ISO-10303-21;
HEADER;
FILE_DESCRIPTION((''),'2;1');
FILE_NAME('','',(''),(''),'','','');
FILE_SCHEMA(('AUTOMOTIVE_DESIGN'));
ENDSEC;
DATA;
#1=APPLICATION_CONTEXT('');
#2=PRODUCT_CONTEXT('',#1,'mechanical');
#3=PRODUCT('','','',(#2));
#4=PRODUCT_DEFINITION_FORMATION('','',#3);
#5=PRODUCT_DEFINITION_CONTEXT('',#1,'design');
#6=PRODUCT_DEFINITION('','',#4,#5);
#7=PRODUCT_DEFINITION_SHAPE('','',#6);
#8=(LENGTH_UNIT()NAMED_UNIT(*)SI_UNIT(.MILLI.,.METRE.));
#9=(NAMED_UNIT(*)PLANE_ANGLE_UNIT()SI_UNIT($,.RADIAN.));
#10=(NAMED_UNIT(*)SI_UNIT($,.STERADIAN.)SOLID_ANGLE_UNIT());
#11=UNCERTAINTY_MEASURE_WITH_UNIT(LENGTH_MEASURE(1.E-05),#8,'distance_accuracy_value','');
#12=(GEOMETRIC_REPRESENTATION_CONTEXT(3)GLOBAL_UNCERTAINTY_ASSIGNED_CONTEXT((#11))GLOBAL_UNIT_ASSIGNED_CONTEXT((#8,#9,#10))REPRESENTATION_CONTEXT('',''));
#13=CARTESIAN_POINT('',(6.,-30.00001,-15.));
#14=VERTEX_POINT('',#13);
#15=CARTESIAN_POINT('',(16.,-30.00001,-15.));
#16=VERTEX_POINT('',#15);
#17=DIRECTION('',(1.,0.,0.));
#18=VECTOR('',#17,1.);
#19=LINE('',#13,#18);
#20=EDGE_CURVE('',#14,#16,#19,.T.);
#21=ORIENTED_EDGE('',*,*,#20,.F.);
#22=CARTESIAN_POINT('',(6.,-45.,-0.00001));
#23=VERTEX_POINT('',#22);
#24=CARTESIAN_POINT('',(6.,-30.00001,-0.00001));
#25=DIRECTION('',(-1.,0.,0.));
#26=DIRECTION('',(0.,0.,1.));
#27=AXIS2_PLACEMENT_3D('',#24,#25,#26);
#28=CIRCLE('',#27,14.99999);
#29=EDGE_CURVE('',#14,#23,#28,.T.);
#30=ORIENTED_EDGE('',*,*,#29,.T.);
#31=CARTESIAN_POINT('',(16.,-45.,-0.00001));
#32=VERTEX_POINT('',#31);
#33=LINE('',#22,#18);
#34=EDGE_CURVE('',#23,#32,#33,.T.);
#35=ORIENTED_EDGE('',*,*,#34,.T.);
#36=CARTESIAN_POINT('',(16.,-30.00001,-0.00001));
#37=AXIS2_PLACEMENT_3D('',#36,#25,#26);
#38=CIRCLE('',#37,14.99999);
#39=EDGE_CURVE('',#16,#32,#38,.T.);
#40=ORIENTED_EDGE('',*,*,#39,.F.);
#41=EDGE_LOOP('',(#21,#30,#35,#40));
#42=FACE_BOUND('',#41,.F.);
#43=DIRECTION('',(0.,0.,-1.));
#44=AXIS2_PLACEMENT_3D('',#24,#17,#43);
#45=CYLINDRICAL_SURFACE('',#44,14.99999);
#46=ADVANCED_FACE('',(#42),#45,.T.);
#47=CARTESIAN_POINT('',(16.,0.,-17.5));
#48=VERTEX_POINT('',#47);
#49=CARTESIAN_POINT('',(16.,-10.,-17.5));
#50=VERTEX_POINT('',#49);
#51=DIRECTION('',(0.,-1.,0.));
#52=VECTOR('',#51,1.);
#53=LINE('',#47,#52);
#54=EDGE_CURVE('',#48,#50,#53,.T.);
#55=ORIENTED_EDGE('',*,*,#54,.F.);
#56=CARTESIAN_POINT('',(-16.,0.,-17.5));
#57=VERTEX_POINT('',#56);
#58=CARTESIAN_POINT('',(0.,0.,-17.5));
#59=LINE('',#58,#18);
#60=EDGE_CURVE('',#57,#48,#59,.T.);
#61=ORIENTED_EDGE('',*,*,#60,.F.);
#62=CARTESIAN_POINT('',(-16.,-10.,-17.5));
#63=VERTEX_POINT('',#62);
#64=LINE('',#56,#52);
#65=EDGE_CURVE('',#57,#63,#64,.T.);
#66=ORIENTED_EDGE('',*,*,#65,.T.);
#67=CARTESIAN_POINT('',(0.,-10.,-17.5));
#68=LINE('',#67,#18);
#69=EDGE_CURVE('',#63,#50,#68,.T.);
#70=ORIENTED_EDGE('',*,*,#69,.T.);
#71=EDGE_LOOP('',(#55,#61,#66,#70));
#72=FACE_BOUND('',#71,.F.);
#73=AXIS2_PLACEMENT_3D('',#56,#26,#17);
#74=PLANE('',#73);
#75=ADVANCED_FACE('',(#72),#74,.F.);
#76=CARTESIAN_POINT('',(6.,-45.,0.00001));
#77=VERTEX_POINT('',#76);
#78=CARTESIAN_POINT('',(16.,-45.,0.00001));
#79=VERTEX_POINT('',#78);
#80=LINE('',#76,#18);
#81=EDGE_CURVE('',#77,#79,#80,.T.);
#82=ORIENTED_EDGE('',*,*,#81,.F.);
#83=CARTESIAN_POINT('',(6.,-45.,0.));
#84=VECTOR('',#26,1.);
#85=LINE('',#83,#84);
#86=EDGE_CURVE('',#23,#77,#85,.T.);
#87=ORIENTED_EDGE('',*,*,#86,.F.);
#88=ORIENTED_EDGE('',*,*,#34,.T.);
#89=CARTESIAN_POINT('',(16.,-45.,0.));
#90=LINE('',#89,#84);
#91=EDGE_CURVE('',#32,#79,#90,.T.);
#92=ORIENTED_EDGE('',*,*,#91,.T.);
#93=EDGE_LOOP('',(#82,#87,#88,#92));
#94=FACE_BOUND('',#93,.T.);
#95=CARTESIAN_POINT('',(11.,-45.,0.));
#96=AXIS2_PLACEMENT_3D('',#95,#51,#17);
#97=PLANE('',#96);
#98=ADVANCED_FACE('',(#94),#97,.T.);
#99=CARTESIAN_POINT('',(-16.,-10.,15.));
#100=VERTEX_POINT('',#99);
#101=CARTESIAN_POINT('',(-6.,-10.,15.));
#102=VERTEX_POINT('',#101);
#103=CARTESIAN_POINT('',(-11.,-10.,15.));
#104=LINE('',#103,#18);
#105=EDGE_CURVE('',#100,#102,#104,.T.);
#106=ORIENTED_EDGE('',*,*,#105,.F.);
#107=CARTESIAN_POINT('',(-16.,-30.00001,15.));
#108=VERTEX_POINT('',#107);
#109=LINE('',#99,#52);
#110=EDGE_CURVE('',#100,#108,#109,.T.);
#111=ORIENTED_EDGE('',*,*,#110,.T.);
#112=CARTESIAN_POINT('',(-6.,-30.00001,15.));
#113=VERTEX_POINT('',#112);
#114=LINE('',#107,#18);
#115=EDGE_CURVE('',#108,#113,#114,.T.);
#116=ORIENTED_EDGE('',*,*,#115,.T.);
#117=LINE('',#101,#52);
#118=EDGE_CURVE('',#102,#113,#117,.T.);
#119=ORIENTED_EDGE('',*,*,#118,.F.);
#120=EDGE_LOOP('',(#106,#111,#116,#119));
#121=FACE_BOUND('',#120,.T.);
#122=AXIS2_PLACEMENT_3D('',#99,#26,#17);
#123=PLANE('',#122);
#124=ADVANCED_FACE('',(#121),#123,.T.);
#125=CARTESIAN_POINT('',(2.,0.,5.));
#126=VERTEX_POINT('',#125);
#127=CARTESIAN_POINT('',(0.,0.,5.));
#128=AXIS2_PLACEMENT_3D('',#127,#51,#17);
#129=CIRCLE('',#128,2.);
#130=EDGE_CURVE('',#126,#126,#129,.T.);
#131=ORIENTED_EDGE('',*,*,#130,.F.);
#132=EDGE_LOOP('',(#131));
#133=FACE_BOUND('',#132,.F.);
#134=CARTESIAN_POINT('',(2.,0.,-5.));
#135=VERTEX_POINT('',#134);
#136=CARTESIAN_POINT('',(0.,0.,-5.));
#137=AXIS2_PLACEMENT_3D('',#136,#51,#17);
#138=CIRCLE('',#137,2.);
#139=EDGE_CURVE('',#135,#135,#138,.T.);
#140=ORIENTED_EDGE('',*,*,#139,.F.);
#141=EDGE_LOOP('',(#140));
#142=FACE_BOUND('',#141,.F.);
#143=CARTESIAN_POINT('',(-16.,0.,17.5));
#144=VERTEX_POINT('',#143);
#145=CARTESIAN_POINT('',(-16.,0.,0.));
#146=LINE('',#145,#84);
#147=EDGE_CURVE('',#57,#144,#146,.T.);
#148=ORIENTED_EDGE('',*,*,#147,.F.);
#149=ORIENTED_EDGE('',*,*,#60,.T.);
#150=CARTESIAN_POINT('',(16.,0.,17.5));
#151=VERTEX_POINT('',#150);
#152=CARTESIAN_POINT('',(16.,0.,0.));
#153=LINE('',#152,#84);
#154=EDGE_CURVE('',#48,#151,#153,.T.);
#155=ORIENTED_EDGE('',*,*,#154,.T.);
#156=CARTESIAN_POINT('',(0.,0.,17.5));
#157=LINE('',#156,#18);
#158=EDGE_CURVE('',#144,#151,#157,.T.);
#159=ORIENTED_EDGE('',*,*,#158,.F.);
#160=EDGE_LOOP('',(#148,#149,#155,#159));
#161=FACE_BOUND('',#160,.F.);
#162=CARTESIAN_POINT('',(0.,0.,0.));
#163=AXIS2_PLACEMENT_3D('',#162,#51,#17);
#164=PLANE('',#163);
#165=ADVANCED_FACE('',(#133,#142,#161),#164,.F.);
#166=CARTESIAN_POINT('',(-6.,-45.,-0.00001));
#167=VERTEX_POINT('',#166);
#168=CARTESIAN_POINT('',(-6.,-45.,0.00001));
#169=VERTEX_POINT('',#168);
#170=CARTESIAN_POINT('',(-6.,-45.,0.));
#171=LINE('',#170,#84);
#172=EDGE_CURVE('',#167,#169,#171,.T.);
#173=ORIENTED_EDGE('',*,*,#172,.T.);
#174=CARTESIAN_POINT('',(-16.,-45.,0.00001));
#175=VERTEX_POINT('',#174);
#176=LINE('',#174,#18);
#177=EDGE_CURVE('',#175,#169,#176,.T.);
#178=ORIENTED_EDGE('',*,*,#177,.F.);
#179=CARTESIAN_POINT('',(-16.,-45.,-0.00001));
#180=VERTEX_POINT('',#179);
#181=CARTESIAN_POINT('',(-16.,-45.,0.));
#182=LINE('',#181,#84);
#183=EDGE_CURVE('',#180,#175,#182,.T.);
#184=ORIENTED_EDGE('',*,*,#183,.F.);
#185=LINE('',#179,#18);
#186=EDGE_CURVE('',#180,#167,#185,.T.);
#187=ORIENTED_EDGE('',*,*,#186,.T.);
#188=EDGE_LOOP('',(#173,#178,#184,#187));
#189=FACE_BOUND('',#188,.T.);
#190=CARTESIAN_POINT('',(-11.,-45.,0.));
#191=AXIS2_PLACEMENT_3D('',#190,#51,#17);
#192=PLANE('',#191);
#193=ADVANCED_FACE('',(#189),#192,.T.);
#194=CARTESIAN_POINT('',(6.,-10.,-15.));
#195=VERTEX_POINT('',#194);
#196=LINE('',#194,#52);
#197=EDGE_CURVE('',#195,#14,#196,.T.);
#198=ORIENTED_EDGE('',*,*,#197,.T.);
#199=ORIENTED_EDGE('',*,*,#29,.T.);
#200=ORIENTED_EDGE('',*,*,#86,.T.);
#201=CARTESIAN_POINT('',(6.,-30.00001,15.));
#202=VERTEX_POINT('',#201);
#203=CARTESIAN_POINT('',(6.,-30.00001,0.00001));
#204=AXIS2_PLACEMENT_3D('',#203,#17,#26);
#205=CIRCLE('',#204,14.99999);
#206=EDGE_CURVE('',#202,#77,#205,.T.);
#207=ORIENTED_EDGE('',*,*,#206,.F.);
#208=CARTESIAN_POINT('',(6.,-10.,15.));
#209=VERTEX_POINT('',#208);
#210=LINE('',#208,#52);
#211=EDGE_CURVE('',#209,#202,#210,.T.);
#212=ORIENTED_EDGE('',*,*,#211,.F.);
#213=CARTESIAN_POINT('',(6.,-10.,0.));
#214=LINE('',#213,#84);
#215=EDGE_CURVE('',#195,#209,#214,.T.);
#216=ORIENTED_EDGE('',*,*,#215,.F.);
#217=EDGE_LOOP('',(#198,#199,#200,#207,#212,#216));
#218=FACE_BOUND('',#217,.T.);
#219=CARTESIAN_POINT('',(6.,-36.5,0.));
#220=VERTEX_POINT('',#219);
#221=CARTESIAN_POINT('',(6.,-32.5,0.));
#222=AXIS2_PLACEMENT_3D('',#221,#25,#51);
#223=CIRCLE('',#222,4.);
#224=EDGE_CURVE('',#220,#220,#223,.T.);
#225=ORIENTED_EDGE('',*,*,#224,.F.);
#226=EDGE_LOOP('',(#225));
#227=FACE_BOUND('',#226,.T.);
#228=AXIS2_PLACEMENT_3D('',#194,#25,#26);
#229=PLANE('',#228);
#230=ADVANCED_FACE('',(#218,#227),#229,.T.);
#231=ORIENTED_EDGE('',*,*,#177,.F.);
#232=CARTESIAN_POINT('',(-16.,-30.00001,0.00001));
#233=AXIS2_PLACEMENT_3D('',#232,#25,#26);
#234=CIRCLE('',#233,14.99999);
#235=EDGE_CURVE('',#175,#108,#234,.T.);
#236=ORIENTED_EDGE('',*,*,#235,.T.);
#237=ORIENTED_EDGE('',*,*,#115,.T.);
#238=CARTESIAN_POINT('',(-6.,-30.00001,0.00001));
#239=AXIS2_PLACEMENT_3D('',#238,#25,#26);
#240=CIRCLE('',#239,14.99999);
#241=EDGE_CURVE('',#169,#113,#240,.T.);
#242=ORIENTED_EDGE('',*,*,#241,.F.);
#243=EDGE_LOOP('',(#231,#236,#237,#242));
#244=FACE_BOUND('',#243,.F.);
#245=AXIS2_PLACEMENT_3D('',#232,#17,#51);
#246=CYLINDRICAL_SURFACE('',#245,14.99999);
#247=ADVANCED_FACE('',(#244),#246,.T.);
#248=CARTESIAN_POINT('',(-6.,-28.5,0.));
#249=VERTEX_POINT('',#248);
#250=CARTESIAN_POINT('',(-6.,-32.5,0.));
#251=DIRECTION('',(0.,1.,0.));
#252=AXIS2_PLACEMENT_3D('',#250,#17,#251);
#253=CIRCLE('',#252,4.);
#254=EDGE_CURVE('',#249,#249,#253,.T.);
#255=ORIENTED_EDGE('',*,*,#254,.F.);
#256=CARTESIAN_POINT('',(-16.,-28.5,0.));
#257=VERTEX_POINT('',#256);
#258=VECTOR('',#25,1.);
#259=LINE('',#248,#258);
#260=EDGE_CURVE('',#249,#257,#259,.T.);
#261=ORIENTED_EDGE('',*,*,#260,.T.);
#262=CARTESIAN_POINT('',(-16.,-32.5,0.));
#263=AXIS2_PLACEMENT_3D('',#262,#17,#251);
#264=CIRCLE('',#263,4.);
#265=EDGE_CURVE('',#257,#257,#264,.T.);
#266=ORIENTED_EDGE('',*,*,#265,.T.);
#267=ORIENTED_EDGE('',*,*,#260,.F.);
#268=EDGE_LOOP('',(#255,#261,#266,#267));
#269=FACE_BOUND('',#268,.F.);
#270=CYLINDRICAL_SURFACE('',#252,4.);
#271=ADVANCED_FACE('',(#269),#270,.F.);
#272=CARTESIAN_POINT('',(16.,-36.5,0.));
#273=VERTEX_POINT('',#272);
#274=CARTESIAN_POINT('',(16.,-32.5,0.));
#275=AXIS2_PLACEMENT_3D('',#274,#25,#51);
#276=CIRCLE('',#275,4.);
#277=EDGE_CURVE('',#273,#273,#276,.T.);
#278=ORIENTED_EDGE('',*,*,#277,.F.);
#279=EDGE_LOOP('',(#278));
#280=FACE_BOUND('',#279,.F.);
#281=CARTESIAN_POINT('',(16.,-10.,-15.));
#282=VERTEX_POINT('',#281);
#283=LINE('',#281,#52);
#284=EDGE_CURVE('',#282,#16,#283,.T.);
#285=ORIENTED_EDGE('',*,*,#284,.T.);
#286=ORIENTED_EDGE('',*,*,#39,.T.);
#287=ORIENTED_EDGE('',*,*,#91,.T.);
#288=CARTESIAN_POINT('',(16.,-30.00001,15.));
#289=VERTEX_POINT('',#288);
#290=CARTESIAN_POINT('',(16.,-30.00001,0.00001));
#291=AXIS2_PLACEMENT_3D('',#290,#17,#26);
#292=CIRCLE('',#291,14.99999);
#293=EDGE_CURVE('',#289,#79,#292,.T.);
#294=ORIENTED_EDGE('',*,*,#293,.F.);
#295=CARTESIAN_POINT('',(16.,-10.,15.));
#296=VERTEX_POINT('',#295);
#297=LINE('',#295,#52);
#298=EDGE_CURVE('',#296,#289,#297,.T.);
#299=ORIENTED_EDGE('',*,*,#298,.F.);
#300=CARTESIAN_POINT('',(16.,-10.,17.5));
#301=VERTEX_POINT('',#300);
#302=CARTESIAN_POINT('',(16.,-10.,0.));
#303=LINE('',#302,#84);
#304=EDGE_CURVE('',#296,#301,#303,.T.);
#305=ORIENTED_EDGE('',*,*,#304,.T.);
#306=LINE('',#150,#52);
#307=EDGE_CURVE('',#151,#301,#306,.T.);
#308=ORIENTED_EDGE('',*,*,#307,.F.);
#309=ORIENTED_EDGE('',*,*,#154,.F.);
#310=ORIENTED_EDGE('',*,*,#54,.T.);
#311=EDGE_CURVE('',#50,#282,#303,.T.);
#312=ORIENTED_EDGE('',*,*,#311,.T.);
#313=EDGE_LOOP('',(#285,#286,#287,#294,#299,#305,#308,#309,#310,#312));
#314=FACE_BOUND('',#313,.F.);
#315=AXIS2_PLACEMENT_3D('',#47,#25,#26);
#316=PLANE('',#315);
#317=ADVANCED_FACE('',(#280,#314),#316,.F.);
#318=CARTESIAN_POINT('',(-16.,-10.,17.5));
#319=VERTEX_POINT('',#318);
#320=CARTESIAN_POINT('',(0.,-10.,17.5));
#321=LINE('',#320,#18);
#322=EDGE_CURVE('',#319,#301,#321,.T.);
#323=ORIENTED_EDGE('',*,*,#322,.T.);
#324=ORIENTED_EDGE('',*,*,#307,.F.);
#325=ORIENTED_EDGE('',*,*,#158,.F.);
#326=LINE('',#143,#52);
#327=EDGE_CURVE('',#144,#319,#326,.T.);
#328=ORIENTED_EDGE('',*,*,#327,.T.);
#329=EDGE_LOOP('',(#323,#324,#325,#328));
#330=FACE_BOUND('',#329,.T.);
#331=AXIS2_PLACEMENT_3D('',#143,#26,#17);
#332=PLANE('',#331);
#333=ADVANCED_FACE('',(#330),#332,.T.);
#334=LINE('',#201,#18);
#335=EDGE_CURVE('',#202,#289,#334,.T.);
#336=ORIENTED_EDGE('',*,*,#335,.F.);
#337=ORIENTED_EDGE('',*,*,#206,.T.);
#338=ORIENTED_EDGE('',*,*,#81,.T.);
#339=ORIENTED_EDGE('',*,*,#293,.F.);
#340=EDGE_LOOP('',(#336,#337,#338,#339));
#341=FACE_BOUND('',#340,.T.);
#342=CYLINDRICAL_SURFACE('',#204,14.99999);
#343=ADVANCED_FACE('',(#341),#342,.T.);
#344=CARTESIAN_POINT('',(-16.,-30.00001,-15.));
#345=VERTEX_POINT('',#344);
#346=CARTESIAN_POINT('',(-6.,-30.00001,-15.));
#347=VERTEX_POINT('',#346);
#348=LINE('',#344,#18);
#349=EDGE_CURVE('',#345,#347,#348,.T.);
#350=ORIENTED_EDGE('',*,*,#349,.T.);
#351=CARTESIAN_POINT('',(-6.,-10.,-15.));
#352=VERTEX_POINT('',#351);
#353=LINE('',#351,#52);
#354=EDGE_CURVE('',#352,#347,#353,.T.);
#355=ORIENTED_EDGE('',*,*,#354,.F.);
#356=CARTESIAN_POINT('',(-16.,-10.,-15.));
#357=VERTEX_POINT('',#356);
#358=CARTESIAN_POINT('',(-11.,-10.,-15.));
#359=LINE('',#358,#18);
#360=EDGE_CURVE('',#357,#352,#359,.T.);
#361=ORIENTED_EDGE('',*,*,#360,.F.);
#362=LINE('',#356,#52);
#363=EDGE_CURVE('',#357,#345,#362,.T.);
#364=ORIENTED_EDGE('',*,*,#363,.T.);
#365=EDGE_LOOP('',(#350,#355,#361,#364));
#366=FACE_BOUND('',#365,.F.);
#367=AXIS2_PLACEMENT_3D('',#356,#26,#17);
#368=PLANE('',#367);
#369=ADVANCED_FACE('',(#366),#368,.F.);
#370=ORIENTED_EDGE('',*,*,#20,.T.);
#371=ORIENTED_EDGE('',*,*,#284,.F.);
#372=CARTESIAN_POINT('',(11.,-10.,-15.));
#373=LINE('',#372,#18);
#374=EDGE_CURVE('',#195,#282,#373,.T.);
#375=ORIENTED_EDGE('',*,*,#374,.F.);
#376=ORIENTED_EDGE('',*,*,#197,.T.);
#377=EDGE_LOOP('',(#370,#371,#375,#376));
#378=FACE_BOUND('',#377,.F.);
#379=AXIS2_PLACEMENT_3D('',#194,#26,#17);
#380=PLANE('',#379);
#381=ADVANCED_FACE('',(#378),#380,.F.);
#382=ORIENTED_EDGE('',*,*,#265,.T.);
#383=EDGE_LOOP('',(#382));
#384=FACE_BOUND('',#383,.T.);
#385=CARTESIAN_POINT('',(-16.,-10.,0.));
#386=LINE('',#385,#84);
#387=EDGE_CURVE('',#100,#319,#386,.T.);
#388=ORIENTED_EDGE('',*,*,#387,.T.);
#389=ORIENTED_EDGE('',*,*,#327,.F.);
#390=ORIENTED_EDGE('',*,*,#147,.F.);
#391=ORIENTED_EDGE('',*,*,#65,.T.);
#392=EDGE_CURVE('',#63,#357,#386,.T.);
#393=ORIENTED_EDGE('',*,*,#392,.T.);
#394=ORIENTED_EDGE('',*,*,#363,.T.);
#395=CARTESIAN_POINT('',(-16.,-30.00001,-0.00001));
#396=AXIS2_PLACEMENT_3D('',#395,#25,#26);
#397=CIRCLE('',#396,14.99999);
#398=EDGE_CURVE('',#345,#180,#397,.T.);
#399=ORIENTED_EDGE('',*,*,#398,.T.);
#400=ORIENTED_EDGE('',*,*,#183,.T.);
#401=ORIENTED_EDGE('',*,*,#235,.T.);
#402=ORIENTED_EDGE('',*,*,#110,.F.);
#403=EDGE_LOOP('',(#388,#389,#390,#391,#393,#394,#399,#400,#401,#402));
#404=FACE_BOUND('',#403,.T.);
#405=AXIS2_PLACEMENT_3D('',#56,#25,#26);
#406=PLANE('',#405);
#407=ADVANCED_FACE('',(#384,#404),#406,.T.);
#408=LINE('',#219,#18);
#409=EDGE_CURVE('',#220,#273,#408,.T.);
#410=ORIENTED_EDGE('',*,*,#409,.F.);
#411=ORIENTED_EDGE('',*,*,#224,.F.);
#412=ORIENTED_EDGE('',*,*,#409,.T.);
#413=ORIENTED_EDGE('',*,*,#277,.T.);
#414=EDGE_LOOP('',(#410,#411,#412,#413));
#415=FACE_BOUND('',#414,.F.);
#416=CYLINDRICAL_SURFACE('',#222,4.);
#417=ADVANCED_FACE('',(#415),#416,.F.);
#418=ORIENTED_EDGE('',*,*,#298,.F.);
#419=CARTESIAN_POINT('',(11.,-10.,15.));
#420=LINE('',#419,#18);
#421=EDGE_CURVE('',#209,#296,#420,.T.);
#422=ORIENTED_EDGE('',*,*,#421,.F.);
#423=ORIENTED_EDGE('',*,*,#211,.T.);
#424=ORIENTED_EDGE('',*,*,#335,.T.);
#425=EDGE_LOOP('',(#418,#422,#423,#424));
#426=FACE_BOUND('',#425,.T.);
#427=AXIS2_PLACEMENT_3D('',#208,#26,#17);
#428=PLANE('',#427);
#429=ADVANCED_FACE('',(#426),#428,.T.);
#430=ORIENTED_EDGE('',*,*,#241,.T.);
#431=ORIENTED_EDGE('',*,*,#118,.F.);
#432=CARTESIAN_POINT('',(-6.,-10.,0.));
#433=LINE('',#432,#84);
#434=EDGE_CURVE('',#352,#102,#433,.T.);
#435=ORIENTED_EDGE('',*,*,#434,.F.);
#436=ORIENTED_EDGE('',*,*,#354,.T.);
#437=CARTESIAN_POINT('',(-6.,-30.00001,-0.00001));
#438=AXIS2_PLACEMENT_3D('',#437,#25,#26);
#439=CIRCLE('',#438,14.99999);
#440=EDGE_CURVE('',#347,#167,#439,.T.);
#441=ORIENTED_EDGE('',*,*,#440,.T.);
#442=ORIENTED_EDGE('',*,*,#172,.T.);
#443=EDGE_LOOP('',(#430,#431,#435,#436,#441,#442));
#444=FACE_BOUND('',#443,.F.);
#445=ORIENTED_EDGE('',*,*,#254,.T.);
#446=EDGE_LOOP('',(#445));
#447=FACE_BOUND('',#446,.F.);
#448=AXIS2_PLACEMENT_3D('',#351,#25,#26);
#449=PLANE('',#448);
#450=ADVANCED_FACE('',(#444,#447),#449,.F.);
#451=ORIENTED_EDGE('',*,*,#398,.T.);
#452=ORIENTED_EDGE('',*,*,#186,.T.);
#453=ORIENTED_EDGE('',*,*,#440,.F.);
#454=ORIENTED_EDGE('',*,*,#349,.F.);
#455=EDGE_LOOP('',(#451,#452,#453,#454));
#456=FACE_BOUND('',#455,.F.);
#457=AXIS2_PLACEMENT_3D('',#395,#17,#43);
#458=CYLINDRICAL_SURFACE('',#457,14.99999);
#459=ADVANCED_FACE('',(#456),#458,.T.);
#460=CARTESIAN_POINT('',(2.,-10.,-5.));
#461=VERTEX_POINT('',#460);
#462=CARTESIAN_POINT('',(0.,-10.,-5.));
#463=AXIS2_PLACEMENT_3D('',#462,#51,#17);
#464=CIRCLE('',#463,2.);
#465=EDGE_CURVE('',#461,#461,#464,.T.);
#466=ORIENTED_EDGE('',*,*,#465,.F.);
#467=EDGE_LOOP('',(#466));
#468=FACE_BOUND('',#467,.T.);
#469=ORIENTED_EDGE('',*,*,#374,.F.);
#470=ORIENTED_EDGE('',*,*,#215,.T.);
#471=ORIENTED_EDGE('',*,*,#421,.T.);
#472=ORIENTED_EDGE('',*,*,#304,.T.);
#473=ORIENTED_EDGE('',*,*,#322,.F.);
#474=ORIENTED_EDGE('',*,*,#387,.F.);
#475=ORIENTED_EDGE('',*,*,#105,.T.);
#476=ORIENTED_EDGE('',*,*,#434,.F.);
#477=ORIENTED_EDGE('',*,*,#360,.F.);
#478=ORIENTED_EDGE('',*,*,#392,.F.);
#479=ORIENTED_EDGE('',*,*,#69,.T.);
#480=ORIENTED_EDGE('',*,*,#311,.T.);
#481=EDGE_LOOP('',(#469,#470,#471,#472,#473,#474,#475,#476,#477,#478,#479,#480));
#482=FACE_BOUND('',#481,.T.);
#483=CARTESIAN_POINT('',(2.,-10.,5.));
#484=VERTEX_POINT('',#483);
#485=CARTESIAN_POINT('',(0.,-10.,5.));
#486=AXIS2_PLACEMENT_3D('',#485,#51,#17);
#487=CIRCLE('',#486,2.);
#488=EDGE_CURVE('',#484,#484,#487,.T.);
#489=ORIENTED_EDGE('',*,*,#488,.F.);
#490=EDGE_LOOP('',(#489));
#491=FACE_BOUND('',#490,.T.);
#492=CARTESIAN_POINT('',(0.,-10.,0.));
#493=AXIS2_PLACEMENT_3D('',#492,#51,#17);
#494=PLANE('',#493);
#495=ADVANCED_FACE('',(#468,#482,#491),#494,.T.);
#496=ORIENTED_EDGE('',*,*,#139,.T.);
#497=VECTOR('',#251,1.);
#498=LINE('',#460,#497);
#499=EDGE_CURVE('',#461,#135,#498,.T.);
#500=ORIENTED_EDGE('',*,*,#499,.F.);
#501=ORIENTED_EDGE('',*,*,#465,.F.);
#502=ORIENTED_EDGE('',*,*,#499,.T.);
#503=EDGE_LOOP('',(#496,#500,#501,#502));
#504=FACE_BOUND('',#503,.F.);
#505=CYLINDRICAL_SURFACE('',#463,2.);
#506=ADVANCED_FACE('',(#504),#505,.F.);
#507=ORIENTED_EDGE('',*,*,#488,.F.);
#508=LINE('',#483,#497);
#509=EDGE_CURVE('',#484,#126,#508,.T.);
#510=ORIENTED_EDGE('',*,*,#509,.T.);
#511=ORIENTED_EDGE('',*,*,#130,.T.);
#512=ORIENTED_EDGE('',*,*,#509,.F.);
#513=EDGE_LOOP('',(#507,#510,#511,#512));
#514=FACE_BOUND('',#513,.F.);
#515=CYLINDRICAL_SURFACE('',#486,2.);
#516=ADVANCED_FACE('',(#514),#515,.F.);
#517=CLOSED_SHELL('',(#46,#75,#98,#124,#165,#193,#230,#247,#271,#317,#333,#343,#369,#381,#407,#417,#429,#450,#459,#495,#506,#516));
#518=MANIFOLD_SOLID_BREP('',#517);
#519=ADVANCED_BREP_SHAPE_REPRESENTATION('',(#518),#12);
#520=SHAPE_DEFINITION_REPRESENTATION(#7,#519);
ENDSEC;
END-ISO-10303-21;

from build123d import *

# Parameters (mm, degrees)
F0_W      = 32
F0_H      = 35
F1_DEPTH  = 10
F2_W      = 10
F2_H      = 30
F3_DEPTH  = 35
F4_R      = 4
F5_DEPTH  = 10.001
F6_R      = 4
F7_DEPTH  = 10.001
F8_R      = 14.99999
F9_R      = 2
F10_DEPTH = 10.001


# Not quite as in the source:
# - a fillet or chamfer is up to 0.001 mm smaller than in the source, because OpenCascade refuses the exact size


with BuildPart() as f1:
    # F0 (on Front) → F1 (new body)
    with BuildSketch(Plane.XZ):
        Rectangle(F0_W, F0_H)
    extrude(amount=F1_DEPTH)

    # F2 (on face) → F3 (join)
    with BuildSketch(Plane.XZ.offset(10)):
        with Locations((-11, 0)):
            Rectangle(F2_W, F2_H)
        with Locations((11, 0)):
            Rectangle(F2_W, F2_H)
    extrude(amount=F3_DEPTH)

    # F4 (on face) → F5 (cut, through all)
    with BuildSketch(Plane.YZ.offset(-6)):
        with Locations((-32.5, 0)):
            Circle(F4_R)
    extrude(amount=-F5_DEPTH, mode=Mode.SUBTRACT)

    # F6 (on face) → F7 (cut, through all)
    with BuildSketch(Plane(origin=(6, 0, 0), x_dir=(0, -1, 0), z_dir=(-1, 0, 0))):
        with Locations((32.5, 0)):
            Circle(F6_R)
    extrude(amount=-F7_DEPTH, mode=Mode.SUBTRACT)

    # F8 (radius 15 in the source; OpenCascade refuses exactly that, so slightly less here)
    f8_edges = [f1.edges().sort_by_distance(p)[0] for p in [
        (-11, -45, -15),
        (11, -45, -15),
        (-11, -45, 15),
        (11, -45, 15),
    ]]
    fillet(f8_edges, radius=F8_R)

    # F9 (on face) → F10 (cut, through all)
    with BuildSketch(Plane.XZ.offset(10)):
        with Locations((0, 5)):
            Circle(F9_R)
        with Locations((0, -5)):
            Circle(F9_R)
    extrude(amount=-F10_DEPTH, mode=Mode.SUBTRACT)


solid = f1.part
